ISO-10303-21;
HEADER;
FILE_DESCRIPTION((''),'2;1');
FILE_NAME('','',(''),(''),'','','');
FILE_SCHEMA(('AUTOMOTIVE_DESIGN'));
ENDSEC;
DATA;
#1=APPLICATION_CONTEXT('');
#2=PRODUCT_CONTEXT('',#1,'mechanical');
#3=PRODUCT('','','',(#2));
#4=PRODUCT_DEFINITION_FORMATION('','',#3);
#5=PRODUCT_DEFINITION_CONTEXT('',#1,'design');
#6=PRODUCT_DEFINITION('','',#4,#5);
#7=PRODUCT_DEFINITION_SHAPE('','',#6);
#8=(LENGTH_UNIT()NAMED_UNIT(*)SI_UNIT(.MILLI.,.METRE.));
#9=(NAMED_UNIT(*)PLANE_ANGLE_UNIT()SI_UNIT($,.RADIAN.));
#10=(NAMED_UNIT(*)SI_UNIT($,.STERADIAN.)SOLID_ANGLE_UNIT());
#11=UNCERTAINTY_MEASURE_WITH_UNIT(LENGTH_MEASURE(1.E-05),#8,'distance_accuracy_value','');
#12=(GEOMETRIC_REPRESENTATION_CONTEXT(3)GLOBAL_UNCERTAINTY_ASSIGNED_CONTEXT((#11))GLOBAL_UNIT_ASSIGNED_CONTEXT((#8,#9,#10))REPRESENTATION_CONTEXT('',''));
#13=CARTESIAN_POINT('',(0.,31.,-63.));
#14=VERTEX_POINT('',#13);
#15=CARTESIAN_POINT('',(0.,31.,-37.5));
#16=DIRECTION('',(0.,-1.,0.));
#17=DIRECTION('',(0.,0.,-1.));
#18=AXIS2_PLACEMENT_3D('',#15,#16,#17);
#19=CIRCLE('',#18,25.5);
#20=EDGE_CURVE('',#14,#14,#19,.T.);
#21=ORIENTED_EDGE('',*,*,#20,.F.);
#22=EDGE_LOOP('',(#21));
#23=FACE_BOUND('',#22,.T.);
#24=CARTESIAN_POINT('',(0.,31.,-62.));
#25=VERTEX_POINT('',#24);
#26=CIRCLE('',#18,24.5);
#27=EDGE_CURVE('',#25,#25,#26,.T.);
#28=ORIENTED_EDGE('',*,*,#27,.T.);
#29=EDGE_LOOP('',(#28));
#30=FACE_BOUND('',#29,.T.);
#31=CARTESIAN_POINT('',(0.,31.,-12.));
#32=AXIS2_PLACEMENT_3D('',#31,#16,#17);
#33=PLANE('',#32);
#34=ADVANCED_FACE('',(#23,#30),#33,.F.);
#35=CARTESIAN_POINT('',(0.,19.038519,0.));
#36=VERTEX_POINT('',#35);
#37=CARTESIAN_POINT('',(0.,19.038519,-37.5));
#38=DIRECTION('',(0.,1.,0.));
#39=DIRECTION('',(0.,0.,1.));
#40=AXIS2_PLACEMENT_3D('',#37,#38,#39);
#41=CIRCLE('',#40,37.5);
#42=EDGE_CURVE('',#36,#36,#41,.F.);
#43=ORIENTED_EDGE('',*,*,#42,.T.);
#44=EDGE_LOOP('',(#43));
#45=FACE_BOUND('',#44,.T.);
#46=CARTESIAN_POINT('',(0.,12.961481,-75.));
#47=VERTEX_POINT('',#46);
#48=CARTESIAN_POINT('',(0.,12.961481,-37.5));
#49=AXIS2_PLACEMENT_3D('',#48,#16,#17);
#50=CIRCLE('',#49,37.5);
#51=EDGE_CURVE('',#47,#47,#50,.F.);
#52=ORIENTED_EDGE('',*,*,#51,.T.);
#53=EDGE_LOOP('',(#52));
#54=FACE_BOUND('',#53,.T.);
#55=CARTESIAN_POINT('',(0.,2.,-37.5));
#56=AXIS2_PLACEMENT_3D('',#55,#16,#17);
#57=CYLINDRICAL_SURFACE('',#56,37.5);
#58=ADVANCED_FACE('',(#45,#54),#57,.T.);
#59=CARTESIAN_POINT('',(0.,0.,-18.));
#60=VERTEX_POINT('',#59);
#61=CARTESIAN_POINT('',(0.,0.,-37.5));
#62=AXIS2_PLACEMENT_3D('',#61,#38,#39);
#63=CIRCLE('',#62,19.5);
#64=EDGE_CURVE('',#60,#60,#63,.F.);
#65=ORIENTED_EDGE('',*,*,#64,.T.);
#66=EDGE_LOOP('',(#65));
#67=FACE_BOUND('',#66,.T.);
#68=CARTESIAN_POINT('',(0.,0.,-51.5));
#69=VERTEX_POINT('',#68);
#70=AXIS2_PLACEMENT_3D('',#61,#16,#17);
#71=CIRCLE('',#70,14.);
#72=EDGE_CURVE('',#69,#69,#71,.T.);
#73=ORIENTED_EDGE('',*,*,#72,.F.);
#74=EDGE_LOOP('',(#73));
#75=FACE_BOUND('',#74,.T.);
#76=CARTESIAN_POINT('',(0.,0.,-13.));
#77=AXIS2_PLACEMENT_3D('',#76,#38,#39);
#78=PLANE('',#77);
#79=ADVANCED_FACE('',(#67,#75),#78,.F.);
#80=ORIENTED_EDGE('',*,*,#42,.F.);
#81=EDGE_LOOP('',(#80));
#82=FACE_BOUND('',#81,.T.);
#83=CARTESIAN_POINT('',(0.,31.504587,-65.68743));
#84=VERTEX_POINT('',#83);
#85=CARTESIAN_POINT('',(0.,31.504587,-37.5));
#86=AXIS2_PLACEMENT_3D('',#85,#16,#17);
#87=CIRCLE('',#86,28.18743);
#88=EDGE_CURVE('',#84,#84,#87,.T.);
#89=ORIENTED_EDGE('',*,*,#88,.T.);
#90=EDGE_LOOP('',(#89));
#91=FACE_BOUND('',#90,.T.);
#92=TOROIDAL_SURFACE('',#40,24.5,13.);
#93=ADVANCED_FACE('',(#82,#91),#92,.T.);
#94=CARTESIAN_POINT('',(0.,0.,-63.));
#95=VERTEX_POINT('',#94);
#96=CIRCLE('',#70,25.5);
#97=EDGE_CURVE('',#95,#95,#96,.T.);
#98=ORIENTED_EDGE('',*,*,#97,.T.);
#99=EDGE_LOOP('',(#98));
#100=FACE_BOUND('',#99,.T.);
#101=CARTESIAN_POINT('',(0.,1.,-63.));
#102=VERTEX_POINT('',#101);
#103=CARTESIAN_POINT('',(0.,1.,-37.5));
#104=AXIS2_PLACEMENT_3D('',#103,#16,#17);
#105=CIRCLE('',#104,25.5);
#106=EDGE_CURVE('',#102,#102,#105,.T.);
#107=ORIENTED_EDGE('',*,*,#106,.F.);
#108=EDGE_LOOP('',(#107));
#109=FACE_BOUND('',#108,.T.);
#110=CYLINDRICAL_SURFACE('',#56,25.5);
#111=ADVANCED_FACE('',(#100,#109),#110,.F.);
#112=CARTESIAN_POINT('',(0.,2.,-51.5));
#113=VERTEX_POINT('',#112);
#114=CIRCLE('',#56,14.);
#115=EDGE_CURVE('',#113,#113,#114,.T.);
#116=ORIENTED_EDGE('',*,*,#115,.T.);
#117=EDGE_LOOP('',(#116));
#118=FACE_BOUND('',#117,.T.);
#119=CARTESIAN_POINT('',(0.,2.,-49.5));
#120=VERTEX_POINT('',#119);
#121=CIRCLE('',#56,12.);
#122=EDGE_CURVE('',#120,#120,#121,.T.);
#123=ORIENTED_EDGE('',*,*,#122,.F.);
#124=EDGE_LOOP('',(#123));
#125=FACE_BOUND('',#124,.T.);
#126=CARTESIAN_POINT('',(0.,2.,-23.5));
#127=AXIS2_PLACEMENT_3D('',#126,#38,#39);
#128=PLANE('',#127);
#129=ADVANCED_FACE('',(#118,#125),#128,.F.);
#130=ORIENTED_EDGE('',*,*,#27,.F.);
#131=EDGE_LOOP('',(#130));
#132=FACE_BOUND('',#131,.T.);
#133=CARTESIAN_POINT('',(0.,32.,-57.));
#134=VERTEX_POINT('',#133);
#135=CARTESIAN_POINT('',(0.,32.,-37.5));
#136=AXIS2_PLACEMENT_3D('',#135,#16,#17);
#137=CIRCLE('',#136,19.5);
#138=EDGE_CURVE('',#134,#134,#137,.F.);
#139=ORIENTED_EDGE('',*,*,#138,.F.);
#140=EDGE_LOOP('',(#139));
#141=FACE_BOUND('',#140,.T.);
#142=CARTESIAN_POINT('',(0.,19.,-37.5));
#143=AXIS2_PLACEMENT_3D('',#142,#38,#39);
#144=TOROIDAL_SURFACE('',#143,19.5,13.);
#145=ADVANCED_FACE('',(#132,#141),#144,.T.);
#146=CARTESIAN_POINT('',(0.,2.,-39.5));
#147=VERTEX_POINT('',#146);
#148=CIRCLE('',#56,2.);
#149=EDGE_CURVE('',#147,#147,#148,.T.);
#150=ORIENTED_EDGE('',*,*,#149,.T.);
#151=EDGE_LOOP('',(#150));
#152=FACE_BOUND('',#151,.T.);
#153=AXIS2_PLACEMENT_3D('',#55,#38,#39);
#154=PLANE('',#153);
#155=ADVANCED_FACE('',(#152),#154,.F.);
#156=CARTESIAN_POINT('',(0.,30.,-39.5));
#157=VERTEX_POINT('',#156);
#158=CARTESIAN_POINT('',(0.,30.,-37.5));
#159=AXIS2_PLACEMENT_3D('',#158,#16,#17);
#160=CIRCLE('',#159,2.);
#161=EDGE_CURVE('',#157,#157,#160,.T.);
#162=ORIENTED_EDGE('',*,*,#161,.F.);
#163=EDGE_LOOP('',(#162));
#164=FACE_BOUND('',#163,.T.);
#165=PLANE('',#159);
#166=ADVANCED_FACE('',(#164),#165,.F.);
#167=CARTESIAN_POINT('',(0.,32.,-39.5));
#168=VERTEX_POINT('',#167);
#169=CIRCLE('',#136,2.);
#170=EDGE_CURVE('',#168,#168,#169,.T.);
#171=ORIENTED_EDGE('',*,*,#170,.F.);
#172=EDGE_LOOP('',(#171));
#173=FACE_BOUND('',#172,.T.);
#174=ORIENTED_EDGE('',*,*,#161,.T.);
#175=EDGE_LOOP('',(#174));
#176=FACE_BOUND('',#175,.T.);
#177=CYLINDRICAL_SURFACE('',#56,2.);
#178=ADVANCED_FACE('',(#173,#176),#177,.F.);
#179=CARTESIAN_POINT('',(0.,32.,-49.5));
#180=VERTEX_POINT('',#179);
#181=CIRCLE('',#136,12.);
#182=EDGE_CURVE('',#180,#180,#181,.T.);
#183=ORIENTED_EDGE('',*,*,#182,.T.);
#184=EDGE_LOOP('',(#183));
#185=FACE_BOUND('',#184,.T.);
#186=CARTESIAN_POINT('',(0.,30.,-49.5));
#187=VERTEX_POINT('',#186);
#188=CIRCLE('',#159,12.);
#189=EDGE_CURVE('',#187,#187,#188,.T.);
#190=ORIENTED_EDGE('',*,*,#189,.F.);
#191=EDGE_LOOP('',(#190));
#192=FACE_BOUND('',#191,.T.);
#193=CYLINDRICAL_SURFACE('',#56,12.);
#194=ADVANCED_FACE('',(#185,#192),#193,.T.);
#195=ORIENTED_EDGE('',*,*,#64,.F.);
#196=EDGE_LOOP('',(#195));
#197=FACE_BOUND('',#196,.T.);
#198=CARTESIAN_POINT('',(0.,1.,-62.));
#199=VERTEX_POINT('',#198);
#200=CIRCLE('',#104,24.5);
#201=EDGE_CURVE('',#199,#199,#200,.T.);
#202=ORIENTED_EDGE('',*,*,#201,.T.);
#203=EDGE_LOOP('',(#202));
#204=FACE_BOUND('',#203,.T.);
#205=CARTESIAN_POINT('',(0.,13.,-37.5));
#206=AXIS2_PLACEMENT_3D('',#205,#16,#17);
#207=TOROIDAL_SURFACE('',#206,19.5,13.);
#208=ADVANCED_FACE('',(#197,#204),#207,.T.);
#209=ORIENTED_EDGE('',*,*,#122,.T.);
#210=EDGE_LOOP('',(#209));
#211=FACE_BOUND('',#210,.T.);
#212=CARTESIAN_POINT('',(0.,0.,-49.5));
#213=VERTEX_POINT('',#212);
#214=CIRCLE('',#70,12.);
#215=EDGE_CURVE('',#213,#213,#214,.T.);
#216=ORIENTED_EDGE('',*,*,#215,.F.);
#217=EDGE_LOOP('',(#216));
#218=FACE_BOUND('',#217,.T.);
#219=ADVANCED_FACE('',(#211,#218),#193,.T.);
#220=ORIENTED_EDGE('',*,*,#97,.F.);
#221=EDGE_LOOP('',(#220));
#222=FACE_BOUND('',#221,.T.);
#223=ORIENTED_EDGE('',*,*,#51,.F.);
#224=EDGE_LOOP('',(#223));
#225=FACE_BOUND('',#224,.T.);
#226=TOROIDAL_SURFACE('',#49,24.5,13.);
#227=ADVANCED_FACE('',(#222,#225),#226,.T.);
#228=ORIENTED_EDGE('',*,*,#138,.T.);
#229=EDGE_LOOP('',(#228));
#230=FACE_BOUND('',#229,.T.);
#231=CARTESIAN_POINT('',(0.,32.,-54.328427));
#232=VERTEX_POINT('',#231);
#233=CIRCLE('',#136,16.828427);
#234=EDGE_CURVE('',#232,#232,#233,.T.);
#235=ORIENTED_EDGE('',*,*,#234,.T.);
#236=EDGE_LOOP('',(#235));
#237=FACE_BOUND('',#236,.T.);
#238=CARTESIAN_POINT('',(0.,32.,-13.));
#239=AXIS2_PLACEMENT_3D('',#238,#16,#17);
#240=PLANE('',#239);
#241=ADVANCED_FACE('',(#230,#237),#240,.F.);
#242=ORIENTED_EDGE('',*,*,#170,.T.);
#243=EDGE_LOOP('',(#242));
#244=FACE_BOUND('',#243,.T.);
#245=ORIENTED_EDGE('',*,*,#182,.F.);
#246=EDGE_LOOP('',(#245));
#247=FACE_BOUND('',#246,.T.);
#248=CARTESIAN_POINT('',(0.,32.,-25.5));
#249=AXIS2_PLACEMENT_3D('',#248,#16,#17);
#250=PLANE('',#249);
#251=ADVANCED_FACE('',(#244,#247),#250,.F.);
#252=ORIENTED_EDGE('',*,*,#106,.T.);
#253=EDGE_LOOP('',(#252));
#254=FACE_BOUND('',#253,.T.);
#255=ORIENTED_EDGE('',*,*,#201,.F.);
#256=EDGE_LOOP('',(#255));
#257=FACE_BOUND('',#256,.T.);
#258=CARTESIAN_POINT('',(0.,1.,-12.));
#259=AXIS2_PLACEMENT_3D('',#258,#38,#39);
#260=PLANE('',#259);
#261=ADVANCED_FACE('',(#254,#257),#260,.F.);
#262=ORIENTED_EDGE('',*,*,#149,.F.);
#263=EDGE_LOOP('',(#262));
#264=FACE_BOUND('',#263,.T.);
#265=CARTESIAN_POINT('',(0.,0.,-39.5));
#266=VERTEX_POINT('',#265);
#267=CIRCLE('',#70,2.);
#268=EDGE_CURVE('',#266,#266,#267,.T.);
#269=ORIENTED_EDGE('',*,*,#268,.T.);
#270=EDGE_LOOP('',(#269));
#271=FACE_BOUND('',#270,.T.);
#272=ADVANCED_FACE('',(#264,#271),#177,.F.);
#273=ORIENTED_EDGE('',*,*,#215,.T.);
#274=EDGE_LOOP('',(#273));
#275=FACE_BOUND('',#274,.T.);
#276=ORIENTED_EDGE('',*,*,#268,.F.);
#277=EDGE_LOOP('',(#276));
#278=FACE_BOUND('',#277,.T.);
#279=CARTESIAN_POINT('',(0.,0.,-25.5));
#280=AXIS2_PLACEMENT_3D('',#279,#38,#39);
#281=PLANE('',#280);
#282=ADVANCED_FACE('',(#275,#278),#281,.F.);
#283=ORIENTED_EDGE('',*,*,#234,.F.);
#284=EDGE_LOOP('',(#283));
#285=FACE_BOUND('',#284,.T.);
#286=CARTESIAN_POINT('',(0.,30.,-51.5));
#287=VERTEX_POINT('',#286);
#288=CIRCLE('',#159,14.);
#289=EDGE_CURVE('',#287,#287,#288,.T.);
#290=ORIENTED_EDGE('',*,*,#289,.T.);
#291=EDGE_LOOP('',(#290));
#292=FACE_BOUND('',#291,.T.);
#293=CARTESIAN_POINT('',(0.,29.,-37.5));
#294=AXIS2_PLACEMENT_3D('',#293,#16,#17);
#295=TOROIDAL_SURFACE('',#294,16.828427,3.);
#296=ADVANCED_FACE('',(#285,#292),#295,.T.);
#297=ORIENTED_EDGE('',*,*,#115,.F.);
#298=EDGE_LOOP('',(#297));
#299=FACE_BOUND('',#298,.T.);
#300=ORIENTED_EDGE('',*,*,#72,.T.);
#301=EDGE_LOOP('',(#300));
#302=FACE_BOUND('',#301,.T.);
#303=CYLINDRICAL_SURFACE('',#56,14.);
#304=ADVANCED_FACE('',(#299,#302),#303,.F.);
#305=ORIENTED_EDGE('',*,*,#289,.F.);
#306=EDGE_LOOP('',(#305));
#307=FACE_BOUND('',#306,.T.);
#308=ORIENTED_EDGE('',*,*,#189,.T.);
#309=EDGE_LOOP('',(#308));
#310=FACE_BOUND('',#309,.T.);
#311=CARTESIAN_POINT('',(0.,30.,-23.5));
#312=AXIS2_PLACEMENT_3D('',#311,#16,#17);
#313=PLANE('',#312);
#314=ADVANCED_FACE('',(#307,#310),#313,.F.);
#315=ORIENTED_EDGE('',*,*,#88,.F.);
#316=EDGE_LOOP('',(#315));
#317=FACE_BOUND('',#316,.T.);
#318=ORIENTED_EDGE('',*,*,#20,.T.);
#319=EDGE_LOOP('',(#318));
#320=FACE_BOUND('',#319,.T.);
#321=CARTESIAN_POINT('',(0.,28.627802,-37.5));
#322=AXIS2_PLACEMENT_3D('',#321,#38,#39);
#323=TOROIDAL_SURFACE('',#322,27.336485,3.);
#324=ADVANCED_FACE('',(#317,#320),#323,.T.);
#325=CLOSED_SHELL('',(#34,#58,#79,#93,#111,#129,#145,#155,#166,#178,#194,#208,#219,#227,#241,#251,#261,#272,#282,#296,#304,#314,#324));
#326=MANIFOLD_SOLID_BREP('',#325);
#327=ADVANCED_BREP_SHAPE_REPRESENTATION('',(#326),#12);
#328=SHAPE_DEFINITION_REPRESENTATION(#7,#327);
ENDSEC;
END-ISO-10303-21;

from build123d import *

# Parameters (mm, degrees)
FILLET_1_R = 13
FILLET_2_R = 13
FILLET_3_R = 3
FILLET_4_R = 3


with BuildPart() as part:
    # 草图1 → 旋转1 (revolve)
    with BuildSketch(Plane(origin=(0, 0, 0), x_dir=(0, 0, -1), z_dir=(1, 0, 0)), mode=Mode.PRIVATE) as revolve_1_sk:
        Polygon((25.5, 32), (35.5, 32), (35.5, 30), (37.5, 30), (37.5, 2), (35.5, 2), (35.5, 0), (25.5, 0), (25.5, 2), (23.5, 2), (23.5, 0), (13, 0), (13, 1), (12, 1), (12, 0), (0, 0), (0, 32), (12, 32), (12, 31), (13, 31), (13, 32), (23.5, 32), (23.5, 30), (25.5, 30), align=None)
    revolve(revolve_1_sk.sketch.rotate(Axis((0, 2, -37.5), (0, 1, 0)), 180), axis=Axis((0, 2, -37.5), (0, 1, 0)))

    # 圆角1
    # the kernel refuses this fillet: 13 mm, written as the material it takes off along each edge
    with BuildSketch(Plane(origin=(0, 0, -37.5), x_dir=(0, 0, -1), z_dir=(1, 0, 0))) as fillet_1_piece_1:
        with BuildLine():
            CenterArc((24.5, 12.961481397), FILLET_1_R, 274.411725786, 85.588274214)
            Line((37.5, 12.961481397), (37.76, 12.961481397))
            Line((37.76, 12.961481397), (37.76, 0))
            Line((37.76, 0), (37.5, -0.26))
            ThreePointArc((37.5, -0.26), (31.5, -0.26), (25.52, -0.259229628))
            Line((25.52, -0.259229628), (25.5, 0))
        make_face()
    revolve(axis=Axis((0, 0, -37.5), (0, 1, 0)), mode=Mode.SUBTRACT)
    with BuildSketch(Plane(origin=(0, 32, -37.5), x_dir=(0, 0, -1), z_dir=(1, 0, 0))) as fillet_1_piece_2:
        with BuildLine():
            CenterArc((24.5, -12.961481397), FILLET_1_R, 0, 85.588274214)
            Line((25.5, 0), (25.52, 0.259229628))
            ThreePointArc((25.52, 0.259229628), (31.5, 0.26), (37.5, 0.26))
            Line((37.5, 0.26), (37.76, 0))
            Line((37.76, 0), (37.76, -12.961481397))
            Line((37.76, -12.961481397), (37.5, -12.961481397))
        make_face()
    revolve(axis=Axis((0, 32, -37.5), (0, 1, 0)), mode=Mode.SUBTRACT)

    # 圆角2
    # the kernel refuses this fillet: 13 mm, written as the material it takes off along each edge
    with BuildSketch(Plane(origin=(0, 32, -37.5), x_dir=(0, 0, -1), z_dir=(1, 0, 0))) as fillet_2_piece_1:
        with BuildLine():
            CenterArc((19.5, -13), FILLET_2_R, 67.380135052, 22.619864948)
            Line((24.5, -1), (24.5, 0))
            Line((24.5, 0), (19.5, 0))
        make_face()
    revolve(axis=Axis((0, 32, -37.5), (0, 1, 0)), mode=Mode.SUBTRACT)
    with BuildSketch(Plane(origin=(0, 0, -37.5), x_dir=(0, 0, -1), z_dir=(1, 0, 0))) as fillet_2_piece_2:
        with BuildLine():
            CenterArc((19.5, 13), FILLET_2_R, 270, 22.619864948)
            Line((19.5, 0), (24.5, 0))
            Line((24.5, 0), (24.5, 1))
        make_face()
    revolve(axis=Axis((0, 0, -37.5), (0, 1, 0)), mode=Mode.SUBTRACT)

    # 圆角3
    # the kernel refuses this fillet: 3 mm, written as the material it takes off along each edge
    with BuildSketch(Plane(origin=(0, 32, -37.5), x_dir=(0, 0, -1), z_dir=(1, 0, 0))) as fillet_3_piece_1:
        with BuildLine():
            CenterArc((16.828427125, -3), FILLET_3_R, 90, 70.528779366)
            Line((16.828427125, 0), (16.828427125, 0.06))
            Line((16.828427125, 0.06), (14, 0.06))
            Line((14, 0.06), (13.94, 0))
            ThreePointArc((13.94, 0), (13.94, -1), (13.943431458, -1.98))
            Line((13.943431458, -1.98), (14, -2))
        make_face()
    revolve(axis=Axis((0, 32, -37.5), (0, 1, 0)), mode=Mode.SUBTRACT)

    # 圆角4
    # the kernel refuses this fillet: 3 mm, written as the material it takes off along each edge
    with BuildSketch(Plane(origin=(0, 32, -37.5), x_dir=(0, 0, -1), z_dir=(1, 0, 0))) as fillet_4_piece_1:
        with BuildLine():
            CenterArc((27.336484743, -3.372198092), FILLET_4_R, 73.521921674, 54.224042323)
            Line((28.187430166, -0.495413101), (28.204449075, -0.437877401))
            ThreePointArc((28.204449075, -0.437877401), (26.867646141, -0.117889541), (25.504615385, 0.059822222))
            Line((25.504615385, 0.059822222), (25.44, 0))
            ThreePointArc((25.44, 0), (25.44, -0.5), (25.463270305, -0.952556038))
            Line((25.463270305, -0.952556038), (25.5, -1))
        make_face()
    revolve(axis=Axis((0, 32, -37.5), (0, 1, 0)), mode=Mode.SUBTRACT)


solid = part.part
